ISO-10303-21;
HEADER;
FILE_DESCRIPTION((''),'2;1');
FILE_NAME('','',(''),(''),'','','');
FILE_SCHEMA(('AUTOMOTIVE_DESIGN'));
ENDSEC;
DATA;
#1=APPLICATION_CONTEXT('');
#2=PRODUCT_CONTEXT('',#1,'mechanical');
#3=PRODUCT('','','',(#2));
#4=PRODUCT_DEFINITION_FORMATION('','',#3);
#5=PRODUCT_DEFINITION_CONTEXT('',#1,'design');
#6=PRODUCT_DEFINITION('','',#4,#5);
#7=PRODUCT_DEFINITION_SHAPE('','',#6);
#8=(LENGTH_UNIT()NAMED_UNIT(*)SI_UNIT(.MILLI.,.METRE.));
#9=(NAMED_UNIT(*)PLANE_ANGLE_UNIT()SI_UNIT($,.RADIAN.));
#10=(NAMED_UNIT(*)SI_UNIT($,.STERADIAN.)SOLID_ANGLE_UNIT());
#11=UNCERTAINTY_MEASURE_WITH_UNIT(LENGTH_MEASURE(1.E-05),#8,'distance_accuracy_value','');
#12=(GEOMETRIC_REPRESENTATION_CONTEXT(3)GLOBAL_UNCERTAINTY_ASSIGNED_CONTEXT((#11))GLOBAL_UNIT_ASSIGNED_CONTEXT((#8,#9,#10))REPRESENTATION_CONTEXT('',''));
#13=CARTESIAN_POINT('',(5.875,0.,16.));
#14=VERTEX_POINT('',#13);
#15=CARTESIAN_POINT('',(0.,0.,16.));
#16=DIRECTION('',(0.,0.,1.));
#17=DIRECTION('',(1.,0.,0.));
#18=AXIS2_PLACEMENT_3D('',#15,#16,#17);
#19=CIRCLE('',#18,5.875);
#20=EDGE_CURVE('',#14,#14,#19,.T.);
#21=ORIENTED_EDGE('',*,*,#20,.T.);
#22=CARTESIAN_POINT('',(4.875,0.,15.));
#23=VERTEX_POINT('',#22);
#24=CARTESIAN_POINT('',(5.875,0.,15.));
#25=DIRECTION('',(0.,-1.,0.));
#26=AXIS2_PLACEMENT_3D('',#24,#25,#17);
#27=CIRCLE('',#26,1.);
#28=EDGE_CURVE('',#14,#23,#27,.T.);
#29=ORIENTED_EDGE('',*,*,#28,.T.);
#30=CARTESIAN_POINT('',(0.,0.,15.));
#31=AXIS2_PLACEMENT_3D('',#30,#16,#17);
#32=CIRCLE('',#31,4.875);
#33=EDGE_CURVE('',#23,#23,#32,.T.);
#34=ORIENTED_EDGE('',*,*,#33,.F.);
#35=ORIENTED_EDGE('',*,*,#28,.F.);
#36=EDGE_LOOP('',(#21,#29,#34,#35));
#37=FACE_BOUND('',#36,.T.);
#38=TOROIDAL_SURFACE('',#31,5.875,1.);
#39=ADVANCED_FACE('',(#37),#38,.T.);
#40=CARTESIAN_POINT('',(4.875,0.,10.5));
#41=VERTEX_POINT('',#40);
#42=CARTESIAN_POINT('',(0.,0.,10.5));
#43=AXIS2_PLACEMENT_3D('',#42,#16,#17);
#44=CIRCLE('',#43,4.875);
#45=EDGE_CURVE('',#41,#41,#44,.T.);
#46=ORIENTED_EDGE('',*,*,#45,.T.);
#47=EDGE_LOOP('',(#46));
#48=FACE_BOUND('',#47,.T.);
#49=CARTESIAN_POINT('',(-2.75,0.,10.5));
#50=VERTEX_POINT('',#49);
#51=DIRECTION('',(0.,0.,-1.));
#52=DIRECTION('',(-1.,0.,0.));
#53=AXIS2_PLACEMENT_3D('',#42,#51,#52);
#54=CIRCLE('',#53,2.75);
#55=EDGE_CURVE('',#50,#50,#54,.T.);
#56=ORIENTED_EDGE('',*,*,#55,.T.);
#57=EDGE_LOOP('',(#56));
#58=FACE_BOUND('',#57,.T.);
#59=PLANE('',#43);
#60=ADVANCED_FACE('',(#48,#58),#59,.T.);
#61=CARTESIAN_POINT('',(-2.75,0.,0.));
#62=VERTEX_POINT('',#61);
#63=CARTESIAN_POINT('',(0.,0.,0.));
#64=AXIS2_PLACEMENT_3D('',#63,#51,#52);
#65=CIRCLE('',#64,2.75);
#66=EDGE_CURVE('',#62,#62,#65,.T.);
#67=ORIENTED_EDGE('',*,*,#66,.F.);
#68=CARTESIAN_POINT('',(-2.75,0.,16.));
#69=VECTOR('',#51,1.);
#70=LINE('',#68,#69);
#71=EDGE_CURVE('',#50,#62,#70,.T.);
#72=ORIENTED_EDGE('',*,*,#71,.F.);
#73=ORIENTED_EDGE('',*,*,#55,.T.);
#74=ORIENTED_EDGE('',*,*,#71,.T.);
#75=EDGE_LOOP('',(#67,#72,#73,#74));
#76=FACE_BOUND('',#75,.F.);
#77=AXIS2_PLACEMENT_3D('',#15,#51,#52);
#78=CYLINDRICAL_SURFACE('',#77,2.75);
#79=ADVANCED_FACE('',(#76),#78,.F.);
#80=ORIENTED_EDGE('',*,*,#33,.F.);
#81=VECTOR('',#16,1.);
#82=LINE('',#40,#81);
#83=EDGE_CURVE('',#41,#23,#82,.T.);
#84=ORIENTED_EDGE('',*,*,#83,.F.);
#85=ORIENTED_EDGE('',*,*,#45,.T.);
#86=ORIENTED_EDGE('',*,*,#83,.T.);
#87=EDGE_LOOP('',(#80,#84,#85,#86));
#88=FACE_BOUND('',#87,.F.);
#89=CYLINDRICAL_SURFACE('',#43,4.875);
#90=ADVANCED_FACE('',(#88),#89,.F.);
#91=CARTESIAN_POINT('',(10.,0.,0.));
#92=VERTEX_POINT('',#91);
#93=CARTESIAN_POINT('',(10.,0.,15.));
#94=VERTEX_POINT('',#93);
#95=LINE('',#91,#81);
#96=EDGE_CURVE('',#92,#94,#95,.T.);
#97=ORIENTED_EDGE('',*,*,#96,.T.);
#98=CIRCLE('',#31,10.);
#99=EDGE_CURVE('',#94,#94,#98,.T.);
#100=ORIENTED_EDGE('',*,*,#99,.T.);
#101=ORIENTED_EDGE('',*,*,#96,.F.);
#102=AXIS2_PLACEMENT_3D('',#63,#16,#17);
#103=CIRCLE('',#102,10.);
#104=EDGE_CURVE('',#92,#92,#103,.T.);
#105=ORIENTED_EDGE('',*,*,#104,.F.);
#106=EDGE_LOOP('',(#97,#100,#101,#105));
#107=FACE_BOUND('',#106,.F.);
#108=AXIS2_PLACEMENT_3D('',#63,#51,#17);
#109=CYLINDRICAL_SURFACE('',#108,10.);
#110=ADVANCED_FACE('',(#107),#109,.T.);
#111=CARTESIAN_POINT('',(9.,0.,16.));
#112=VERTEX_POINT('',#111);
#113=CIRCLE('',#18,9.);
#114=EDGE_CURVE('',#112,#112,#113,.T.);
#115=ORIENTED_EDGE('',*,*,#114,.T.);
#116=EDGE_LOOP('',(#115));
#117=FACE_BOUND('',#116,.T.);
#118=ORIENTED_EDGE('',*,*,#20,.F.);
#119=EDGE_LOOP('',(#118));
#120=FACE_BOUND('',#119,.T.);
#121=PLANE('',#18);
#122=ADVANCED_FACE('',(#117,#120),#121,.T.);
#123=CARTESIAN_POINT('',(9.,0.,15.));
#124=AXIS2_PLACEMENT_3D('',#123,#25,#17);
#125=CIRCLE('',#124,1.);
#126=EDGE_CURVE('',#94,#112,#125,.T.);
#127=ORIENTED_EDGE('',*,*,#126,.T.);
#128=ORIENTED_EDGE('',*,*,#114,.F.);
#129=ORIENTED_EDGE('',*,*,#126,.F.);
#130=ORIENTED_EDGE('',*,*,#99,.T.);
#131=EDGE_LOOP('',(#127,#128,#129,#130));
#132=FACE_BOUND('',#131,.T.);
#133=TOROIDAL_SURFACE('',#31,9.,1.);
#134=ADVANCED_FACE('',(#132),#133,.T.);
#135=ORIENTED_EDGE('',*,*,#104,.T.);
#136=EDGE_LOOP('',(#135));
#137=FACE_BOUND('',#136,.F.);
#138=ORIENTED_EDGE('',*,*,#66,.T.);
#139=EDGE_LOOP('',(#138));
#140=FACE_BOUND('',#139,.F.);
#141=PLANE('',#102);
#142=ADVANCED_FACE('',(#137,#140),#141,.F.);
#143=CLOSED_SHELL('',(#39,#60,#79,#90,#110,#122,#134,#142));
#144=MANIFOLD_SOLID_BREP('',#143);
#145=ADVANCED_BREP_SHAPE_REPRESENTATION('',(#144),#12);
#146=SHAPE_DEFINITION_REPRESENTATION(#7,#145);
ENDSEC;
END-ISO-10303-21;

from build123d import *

# Parameters (mm, degrees)
F0_R           = 10
F1_DEPTH       = 16
F3_D           = 5.5
F3_CBORE_D     = 9.75
F3_CBORE_DEPTH = 5.5
F4_R           = 1


with BuildPart() as f1:
    # F0 (on Top) → F1 (new body)
    with BuildSketch(Plane.XY):
        Circle(F0_R)
    extrude(amount=F1_DEPTH)

    # F3 (through all)
    with Locations(Plane.XY.offset(16)):
        with Locations((0, 0)):
            CounterBoreHole(F3_D / 2, F3_CBORE_D / 2, F3_CBORE_DEPTH)

    # F4
    f4_edges = [f1.edges().sort_by_distance(p)[0] for p in [
        (-10, 0, 16),
        (-4.875, 0, 16),
    ]]
    fillet(f4_edges, radius=F4_R)


solid = f1.part
